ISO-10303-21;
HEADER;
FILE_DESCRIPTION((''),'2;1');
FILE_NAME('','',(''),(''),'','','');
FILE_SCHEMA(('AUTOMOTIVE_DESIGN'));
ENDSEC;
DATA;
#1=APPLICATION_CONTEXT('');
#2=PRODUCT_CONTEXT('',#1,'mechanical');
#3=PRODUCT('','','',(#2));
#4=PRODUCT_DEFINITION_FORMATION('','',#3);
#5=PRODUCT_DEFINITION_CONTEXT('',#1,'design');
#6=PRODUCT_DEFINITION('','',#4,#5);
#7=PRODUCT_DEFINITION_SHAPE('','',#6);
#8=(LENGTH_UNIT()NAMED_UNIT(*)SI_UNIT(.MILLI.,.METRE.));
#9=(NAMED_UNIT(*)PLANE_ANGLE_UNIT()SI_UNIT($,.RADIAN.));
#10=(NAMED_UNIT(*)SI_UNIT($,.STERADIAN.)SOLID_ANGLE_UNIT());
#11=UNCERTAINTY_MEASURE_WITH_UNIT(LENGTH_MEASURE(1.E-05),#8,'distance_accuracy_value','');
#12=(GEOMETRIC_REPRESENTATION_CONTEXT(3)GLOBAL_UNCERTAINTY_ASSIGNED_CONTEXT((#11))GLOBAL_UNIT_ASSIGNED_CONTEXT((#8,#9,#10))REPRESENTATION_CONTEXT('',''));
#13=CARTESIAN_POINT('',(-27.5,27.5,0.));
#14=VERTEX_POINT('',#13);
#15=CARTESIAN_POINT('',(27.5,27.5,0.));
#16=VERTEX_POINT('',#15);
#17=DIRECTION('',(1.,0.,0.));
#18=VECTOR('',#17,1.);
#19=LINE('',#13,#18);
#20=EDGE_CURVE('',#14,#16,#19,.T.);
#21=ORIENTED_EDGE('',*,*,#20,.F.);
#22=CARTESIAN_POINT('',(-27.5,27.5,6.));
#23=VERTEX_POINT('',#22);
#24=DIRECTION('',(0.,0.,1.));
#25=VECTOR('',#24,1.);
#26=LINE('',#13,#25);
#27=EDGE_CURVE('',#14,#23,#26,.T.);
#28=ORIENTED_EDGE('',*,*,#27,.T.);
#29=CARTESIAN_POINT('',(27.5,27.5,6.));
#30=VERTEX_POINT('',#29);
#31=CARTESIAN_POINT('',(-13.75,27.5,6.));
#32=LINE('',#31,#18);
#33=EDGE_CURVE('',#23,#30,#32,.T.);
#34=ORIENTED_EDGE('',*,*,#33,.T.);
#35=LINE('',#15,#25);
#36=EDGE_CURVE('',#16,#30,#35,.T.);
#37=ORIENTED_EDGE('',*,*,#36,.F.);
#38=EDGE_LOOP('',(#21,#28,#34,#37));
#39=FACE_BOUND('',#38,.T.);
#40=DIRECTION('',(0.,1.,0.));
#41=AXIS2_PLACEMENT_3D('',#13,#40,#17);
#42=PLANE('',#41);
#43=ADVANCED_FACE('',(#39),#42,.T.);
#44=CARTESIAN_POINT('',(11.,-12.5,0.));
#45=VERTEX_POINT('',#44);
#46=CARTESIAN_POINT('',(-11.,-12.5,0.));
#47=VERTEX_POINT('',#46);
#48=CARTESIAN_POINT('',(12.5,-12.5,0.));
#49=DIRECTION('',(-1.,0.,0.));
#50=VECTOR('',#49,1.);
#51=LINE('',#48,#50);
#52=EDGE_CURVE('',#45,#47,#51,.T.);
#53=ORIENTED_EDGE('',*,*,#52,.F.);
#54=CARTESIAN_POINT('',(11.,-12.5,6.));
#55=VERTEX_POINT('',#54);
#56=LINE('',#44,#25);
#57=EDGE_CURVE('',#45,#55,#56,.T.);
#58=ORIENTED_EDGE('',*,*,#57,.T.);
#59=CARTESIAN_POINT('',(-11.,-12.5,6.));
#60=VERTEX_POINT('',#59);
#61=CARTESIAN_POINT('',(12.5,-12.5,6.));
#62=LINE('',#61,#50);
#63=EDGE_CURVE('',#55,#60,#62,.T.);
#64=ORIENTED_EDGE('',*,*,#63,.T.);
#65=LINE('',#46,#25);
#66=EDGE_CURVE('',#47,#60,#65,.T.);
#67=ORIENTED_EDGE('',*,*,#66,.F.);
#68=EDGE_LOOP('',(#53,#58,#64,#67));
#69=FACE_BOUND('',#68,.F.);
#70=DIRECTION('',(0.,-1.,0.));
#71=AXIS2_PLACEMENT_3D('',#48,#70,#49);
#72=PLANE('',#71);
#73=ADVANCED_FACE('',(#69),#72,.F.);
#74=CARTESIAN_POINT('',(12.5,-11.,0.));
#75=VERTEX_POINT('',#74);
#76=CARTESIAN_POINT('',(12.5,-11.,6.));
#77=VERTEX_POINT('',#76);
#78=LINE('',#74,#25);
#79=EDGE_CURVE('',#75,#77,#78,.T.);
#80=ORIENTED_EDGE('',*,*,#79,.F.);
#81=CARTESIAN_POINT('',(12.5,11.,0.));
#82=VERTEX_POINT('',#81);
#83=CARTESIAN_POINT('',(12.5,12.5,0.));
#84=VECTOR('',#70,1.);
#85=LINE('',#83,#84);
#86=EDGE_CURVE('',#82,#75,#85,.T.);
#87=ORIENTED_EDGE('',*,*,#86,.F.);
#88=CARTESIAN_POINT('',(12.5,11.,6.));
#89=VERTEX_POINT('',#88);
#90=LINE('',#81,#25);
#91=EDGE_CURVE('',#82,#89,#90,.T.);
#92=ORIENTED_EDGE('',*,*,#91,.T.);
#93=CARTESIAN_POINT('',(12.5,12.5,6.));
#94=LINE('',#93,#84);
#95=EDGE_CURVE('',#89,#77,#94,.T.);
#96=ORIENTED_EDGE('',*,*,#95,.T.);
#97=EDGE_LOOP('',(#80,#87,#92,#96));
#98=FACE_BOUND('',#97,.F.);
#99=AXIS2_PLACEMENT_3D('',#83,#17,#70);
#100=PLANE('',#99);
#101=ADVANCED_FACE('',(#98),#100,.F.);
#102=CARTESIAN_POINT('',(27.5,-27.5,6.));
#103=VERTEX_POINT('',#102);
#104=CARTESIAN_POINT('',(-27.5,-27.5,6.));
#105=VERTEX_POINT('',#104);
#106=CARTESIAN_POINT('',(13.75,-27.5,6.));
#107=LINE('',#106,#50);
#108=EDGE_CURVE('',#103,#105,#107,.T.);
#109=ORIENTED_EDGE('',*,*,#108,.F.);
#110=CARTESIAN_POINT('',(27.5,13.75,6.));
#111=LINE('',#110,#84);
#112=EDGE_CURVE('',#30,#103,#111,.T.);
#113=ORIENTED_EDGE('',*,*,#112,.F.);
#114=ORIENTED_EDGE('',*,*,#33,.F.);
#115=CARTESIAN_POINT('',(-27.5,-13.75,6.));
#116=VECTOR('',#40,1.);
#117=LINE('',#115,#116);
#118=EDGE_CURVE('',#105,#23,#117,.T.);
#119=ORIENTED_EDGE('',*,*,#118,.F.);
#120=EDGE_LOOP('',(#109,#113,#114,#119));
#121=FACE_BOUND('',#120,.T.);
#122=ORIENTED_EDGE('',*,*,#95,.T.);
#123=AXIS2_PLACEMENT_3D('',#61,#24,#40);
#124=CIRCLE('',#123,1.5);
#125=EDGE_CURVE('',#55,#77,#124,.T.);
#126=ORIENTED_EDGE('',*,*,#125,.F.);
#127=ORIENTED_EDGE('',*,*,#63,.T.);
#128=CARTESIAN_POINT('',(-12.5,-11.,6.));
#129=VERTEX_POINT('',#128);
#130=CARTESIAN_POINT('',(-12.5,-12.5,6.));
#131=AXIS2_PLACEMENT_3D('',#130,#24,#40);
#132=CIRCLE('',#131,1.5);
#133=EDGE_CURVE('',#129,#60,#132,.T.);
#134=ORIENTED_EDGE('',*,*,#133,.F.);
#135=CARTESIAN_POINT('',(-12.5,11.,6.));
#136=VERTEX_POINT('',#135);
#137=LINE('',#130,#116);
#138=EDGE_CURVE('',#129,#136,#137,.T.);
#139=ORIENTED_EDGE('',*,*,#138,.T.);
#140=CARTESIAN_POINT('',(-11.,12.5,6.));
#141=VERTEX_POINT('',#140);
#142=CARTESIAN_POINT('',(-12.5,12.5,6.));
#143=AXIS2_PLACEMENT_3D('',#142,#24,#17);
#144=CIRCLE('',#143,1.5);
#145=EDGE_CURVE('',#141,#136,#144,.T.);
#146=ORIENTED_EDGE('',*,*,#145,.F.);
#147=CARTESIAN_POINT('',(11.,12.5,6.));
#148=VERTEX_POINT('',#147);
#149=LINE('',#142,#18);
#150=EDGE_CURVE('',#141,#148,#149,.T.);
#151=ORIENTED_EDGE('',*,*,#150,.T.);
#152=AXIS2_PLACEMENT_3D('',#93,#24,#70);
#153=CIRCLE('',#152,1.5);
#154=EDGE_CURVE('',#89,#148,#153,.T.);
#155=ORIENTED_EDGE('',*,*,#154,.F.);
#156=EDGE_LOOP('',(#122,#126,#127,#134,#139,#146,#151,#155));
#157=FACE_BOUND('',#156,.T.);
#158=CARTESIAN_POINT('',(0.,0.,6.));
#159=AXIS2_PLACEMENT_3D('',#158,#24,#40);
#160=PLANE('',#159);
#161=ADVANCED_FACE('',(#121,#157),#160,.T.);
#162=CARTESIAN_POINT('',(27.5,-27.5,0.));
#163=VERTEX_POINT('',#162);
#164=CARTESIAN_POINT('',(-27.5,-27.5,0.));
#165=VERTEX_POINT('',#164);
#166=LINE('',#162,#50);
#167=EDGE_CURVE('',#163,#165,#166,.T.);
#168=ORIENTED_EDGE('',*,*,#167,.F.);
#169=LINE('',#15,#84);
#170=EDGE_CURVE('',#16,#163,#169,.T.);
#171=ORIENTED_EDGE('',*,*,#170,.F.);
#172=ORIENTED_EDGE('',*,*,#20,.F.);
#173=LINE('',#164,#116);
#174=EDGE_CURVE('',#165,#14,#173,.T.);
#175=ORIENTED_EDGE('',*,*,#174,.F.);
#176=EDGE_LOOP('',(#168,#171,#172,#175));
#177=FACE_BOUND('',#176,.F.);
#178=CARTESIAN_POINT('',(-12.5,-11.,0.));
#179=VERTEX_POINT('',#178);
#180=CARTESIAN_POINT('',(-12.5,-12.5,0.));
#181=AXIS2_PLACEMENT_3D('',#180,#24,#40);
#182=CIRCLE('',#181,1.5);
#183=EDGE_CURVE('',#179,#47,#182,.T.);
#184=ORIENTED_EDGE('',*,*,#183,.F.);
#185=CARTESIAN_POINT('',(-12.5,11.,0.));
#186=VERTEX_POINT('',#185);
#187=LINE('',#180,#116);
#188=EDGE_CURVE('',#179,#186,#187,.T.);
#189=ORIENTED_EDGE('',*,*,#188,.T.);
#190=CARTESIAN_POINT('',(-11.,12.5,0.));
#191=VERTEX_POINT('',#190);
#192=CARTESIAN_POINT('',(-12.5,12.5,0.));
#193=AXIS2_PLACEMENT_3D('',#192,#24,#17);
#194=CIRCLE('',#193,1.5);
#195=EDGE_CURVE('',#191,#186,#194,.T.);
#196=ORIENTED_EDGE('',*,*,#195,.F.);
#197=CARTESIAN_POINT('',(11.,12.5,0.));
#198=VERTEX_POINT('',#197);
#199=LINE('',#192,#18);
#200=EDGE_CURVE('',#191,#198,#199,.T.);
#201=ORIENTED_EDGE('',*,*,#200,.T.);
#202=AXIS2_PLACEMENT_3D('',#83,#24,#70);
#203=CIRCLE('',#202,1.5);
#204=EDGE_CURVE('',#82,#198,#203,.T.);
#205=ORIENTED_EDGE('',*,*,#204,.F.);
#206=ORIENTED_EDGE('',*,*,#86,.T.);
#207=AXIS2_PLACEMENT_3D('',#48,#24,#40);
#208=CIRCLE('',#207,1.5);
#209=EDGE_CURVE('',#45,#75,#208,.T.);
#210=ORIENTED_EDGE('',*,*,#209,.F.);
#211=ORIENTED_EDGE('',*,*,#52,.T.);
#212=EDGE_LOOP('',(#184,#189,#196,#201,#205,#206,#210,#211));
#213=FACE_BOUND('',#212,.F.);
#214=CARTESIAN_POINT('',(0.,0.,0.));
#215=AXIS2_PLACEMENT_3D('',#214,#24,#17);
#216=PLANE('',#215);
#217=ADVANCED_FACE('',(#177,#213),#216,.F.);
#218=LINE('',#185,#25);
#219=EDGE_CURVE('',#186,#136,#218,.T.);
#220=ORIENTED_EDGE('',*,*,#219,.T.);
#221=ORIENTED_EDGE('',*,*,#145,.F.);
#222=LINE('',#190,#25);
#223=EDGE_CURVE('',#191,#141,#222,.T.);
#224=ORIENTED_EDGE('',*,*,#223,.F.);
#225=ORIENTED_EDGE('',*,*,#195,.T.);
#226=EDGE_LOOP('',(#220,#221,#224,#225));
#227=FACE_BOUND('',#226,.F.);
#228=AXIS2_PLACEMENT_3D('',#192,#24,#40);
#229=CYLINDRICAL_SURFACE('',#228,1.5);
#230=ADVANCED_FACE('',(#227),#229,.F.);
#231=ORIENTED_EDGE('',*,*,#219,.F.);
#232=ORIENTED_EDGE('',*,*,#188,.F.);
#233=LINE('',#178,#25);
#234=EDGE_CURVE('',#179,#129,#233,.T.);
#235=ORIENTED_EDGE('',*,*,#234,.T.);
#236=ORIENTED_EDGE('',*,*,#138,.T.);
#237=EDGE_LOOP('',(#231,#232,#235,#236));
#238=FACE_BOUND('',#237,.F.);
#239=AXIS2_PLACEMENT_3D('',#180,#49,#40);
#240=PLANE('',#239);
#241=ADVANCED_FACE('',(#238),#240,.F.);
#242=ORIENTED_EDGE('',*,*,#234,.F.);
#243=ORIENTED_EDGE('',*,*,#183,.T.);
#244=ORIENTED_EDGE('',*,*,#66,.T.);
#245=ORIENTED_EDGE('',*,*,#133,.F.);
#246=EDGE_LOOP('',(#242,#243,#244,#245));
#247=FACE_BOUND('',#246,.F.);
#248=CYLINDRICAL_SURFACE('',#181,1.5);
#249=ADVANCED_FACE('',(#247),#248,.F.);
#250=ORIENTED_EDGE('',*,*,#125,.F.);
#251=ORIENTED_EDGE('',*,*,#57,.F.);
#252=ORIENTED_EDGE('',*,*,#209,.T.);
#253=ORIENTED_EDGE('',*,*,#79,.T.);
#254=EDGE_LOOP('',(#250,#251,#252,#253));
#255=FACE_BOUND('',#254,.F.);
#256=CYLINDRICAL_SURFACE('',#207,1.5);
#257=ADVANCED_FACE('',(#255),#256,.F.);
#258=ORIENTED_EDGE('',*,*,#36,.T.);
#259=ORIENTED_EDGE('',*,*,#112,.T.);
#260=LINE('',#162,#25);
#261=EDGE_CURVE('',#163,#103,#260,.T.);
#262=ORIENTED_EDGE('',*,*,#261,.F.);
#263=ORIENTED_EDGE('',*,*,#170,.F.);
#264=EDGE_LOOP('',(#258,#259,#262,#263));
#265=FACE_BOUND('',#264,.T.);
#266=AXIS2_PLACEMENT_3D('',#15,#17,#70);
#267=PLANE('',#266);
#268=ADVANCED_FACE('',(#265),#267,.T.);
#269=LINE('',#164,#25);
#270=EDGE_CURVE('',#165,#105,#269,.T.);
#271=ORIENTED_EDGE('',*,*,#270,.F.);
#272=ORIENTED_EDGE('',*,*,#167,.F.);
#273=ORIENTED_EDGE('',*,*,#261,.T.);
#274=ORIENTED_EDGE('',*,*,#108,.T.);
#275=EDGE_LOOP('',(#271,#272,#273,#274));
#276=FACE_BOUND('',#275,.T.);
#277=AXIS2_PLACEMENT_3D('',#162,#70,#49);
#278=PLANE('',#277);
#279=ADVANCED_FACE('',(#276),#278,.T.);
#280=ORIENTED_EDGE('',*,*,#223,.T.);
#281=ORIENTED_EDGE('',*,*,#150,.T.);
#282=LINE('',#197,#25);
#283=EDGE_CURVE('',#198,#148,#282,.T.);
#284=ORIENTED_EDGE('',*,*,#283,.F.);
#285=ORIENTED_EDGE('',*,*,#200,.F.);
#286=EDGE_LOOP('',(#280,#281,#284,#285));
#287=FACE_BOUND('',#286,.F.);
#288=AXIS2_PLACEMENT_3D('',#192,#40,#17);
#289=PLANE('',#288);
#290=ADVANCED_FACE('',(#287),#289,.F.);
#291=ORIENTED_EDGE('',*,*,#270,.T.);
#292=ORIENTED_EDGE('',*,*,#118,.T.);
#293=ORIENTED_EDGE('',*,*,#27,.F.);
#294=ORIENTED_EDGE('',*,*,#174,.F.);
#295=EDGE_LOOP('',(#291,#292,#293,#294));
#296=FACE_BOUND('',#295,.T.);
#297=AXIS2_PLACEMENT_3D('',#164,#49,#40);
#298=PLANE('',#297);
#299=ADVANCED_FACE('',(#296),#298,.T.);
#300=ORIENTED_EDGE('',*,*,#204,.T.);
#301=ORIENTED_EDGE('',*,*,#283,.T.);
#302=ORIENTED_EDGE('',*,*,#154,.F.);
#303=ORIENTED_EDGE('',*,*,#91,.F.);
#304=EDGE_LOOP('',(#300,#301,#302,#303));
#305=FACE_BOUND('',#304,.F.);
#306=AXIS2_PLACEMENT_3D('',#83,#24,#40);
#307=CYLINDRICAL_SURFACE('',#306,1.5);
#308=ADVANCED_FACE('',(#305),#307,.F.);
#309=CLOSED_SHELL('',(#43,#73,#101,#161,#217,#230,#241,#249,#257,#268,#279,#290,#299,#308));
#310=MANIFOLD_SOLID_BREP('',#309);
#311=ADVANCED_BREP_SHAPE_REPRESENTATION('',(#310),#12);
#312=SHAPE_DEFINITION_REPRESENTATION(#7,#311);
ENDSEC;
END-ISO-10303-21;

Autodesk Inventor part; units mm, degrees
ref_plane "YZ Plane" through (0, 0, 0) normal (1, 0, 0) x (0, 1, 0)
ref_plane "XZ Plane" through (0, 0, 0) normal (0, 1, 0) x (-1, 0, 0)
ref_plane "XY Plane" through (0, 0, 0) normal (0, 0, 1) x (1, 0, 0)
sketch "Sketch1" plane through (0, 0, 0) normal (0, 0, 1) x (1, 0, 0)
  line L0 (0, 38.5) -> (0, -38.5) construction
  line L1 (-38.5, 0) -> (38.5, 0) construction
  line L2 (-27.5, 27.5) -> (27.5, 27.5)
  line L3 (27.5, 27.5) -> (27.5, -27.5)
  line L4 (27.5, -27.5) -> (-27.5, -27.5)
  line L5 (-27.5, -27.5) -> (-27.5, 27.5)
  point P0 (0, 0)
  dimension "d0" = 55
  dimension "d1" = 55
extrude "Extrusion1" add sketch "Sketch1" along normal blind 20
sketch "Sketch4" plane through (0, 0, 20) normal (0, 0, 1) x (1, 0, 0)
  line L0 (-38.5, 0) -> (38.5, 0) construction
  line L1 (0, 38.5) -> (0, -38.5) construction
  line L2 (-22.55, 22.55) -> (22.55, 22.55) construction
  line L3 (22.55, 22.55) -> (22.55, -22.55) construction
  line L4 (22.55, -22.55) -> (-22.55, -22.55) construction
  line L5 (-22.55, -22.55) -> (-22.55, 22.55) construction
  point P0 (0, 0)
  dimension "d15" = 45.1
  dimension "d16" = 45.1
hole "Hole2" at (-22.55, 22.55, 20) at (22.55, 22.55, 20) at (22.55, -22.55, 20) at (-22.55, -22.55, 20) at (-22.55, 22.55, 20) at (22.55, 22.55, 20) direction (0, 0, -1) diameter 5 depth 8
sketch "Sketch5" plane through (0, 0, 20) normal (0, 0, 1) x (1, 0, 0)
  circle A0 centre (-22.55, 22.55) radius 2.5 projected
  circle A1 centre (22.55, -22.55) radius 2.5 projected
  line L0 (-22.55, 22.55) -> (22.55, 22.55)
  line L1 (22.55, 22.55) -> (22.55, -22.55)
  line L2 (22.55, -22.55) -> (-22.55, -22.55)
  line L3 (-22.55, -22.55) -> (-22.55, 22.55)
  point P0 (0, 0)
extrude "Extrusion3" cut sketch "Sketch5" against normal blind 8 contours L0 L1 A1 L2 L3 A0 | A0 L3 L0 | L1 L2 A1 picked at (-20.9042, 22.3646) picked at (22.003, -20.9868)
sketch "Sketch6" plane through (-27.5, -27.5, 0) normal (-1, 0, 0) x (0, 0, 1)
  line L0 (0, 55) -> (20, 55) projected
  line L1 (0, 0) -> (20, 0) projected
  line L2 (20, 7.45) -> (12, 7.45) construction
  line L3 (20, 47.55) -> (20, 7.45) construction
  line L4 (12, 47.55) -> (20, 47.55) construction
  line L5 (12, 7.45) -> (12, 47.55) construction
  line L6 (16, 47.55) -> (16, 7.45) construction
  point P0 (0, 27.5)
  point P1 (16, 40)
  point P2 (16, 15)
  dimension "d26" = 15
  dimension "d27" = 15
hole "Hole3" at (-27.5, 12.5, 16) at (-27.5, -12.5, 16) direction (1, 0, 0) diameter 3.242 end up to surface thread size "M4x0.7" class "6H" standard "ANSI Metric M Profile"
sketch "Sketch8" plane through (0, 0, 0) normal (0, 0, -1) x (-1, 0, 0)
  line L0 (27.5, 27.5) -> (-27.5, 27.5) construction
  line L1 (-27.5, 27.5) -> (-27.5, -27.5) construction
  line L2 (-27.5, -27.5) -> (27.5, -27.5) construction
  line L3 (27.5, -27.5) -> (27.5, 27.5) construction
  line L4 (0, -38.5) -> (0, 38.5) construction
  line L5 (-38.5, 0) -> (38.5, 0) construction
  line L6 (-12.5, -12.5) -> (12.5, -12.5)
  line L7 (12.5, -12.5) -> (12.5, 12.5)
  line L8 (12.5, 12.5) -> (-12.5, 12.5)
  line L9 (-12.5, 12.5) -> (-12.5, -12.5)
  point P0 (0, 0)
  dimension "d44" = 25
  dimension "d45" = 25
extrude "Extrusion4" cut sketch "Sketch8" against normal blind 6
sketch "Sketch9" plane through (0, 0, 0) normal (0, 0, -1) x (-1, 0, 0)
  line L0 (12.5, 12.5) -> (12.5, -12.5) construction
  line L1 (12.5, -12.5) -> (-12.5, -12.5) construction
  line L2 (-12.5, -12.5) -> (-12.5, 12.5) construction
  line L3 (-12.5, 12.5) -> (12.5, 12.5) construction
  line L4 (27.5, 27.5) -> (-27.5, 27.5) construction
  line L5 (-27.5, 27.5) -> (-27.5, -27.5) construction
  line L6 (-27.5, -27.5) -> (27.5, -27.5) construction
  line L7 (27.5, -27.5) -> (27.5, 27.5) construction
  line L8 (12.5, -12.5) -> (-12.5, -12.5) construction
  point P0 (0, 0)
hole "Hole5" at (-12.5, 12.5, 0) at (-12.5, -12.5, 0) at (12.5, -12.5, 0) at (12.5, 12.5, 0) direction (0, 0, 1) diameter 3 depth 6
sketch "Sketch10" plane through (0, 0, 6) normal (0, 0, -1) x (-1, 0, 0)
  point P0 (0, 0)
  point P1 (0, 0)
hole "Hole6" at (0, 0, 6) direction (0, 0, 1) diameter 3.242 depth 4 tip angle 118 thread size "M4x0.7" class "6H" standard "ANSI Metric M Profile"
ref_plane "SplitPlane" through (0, 0, 6) normal (0, 0, -1) x (-1, 0, 0)
split "Split3" plane through (0, 0, 6) removes the side toward (0, 0, 1)
properties part number "Large-cuvette-mount-40mm-V4_bottom" material "PC/ABS Plastic"
